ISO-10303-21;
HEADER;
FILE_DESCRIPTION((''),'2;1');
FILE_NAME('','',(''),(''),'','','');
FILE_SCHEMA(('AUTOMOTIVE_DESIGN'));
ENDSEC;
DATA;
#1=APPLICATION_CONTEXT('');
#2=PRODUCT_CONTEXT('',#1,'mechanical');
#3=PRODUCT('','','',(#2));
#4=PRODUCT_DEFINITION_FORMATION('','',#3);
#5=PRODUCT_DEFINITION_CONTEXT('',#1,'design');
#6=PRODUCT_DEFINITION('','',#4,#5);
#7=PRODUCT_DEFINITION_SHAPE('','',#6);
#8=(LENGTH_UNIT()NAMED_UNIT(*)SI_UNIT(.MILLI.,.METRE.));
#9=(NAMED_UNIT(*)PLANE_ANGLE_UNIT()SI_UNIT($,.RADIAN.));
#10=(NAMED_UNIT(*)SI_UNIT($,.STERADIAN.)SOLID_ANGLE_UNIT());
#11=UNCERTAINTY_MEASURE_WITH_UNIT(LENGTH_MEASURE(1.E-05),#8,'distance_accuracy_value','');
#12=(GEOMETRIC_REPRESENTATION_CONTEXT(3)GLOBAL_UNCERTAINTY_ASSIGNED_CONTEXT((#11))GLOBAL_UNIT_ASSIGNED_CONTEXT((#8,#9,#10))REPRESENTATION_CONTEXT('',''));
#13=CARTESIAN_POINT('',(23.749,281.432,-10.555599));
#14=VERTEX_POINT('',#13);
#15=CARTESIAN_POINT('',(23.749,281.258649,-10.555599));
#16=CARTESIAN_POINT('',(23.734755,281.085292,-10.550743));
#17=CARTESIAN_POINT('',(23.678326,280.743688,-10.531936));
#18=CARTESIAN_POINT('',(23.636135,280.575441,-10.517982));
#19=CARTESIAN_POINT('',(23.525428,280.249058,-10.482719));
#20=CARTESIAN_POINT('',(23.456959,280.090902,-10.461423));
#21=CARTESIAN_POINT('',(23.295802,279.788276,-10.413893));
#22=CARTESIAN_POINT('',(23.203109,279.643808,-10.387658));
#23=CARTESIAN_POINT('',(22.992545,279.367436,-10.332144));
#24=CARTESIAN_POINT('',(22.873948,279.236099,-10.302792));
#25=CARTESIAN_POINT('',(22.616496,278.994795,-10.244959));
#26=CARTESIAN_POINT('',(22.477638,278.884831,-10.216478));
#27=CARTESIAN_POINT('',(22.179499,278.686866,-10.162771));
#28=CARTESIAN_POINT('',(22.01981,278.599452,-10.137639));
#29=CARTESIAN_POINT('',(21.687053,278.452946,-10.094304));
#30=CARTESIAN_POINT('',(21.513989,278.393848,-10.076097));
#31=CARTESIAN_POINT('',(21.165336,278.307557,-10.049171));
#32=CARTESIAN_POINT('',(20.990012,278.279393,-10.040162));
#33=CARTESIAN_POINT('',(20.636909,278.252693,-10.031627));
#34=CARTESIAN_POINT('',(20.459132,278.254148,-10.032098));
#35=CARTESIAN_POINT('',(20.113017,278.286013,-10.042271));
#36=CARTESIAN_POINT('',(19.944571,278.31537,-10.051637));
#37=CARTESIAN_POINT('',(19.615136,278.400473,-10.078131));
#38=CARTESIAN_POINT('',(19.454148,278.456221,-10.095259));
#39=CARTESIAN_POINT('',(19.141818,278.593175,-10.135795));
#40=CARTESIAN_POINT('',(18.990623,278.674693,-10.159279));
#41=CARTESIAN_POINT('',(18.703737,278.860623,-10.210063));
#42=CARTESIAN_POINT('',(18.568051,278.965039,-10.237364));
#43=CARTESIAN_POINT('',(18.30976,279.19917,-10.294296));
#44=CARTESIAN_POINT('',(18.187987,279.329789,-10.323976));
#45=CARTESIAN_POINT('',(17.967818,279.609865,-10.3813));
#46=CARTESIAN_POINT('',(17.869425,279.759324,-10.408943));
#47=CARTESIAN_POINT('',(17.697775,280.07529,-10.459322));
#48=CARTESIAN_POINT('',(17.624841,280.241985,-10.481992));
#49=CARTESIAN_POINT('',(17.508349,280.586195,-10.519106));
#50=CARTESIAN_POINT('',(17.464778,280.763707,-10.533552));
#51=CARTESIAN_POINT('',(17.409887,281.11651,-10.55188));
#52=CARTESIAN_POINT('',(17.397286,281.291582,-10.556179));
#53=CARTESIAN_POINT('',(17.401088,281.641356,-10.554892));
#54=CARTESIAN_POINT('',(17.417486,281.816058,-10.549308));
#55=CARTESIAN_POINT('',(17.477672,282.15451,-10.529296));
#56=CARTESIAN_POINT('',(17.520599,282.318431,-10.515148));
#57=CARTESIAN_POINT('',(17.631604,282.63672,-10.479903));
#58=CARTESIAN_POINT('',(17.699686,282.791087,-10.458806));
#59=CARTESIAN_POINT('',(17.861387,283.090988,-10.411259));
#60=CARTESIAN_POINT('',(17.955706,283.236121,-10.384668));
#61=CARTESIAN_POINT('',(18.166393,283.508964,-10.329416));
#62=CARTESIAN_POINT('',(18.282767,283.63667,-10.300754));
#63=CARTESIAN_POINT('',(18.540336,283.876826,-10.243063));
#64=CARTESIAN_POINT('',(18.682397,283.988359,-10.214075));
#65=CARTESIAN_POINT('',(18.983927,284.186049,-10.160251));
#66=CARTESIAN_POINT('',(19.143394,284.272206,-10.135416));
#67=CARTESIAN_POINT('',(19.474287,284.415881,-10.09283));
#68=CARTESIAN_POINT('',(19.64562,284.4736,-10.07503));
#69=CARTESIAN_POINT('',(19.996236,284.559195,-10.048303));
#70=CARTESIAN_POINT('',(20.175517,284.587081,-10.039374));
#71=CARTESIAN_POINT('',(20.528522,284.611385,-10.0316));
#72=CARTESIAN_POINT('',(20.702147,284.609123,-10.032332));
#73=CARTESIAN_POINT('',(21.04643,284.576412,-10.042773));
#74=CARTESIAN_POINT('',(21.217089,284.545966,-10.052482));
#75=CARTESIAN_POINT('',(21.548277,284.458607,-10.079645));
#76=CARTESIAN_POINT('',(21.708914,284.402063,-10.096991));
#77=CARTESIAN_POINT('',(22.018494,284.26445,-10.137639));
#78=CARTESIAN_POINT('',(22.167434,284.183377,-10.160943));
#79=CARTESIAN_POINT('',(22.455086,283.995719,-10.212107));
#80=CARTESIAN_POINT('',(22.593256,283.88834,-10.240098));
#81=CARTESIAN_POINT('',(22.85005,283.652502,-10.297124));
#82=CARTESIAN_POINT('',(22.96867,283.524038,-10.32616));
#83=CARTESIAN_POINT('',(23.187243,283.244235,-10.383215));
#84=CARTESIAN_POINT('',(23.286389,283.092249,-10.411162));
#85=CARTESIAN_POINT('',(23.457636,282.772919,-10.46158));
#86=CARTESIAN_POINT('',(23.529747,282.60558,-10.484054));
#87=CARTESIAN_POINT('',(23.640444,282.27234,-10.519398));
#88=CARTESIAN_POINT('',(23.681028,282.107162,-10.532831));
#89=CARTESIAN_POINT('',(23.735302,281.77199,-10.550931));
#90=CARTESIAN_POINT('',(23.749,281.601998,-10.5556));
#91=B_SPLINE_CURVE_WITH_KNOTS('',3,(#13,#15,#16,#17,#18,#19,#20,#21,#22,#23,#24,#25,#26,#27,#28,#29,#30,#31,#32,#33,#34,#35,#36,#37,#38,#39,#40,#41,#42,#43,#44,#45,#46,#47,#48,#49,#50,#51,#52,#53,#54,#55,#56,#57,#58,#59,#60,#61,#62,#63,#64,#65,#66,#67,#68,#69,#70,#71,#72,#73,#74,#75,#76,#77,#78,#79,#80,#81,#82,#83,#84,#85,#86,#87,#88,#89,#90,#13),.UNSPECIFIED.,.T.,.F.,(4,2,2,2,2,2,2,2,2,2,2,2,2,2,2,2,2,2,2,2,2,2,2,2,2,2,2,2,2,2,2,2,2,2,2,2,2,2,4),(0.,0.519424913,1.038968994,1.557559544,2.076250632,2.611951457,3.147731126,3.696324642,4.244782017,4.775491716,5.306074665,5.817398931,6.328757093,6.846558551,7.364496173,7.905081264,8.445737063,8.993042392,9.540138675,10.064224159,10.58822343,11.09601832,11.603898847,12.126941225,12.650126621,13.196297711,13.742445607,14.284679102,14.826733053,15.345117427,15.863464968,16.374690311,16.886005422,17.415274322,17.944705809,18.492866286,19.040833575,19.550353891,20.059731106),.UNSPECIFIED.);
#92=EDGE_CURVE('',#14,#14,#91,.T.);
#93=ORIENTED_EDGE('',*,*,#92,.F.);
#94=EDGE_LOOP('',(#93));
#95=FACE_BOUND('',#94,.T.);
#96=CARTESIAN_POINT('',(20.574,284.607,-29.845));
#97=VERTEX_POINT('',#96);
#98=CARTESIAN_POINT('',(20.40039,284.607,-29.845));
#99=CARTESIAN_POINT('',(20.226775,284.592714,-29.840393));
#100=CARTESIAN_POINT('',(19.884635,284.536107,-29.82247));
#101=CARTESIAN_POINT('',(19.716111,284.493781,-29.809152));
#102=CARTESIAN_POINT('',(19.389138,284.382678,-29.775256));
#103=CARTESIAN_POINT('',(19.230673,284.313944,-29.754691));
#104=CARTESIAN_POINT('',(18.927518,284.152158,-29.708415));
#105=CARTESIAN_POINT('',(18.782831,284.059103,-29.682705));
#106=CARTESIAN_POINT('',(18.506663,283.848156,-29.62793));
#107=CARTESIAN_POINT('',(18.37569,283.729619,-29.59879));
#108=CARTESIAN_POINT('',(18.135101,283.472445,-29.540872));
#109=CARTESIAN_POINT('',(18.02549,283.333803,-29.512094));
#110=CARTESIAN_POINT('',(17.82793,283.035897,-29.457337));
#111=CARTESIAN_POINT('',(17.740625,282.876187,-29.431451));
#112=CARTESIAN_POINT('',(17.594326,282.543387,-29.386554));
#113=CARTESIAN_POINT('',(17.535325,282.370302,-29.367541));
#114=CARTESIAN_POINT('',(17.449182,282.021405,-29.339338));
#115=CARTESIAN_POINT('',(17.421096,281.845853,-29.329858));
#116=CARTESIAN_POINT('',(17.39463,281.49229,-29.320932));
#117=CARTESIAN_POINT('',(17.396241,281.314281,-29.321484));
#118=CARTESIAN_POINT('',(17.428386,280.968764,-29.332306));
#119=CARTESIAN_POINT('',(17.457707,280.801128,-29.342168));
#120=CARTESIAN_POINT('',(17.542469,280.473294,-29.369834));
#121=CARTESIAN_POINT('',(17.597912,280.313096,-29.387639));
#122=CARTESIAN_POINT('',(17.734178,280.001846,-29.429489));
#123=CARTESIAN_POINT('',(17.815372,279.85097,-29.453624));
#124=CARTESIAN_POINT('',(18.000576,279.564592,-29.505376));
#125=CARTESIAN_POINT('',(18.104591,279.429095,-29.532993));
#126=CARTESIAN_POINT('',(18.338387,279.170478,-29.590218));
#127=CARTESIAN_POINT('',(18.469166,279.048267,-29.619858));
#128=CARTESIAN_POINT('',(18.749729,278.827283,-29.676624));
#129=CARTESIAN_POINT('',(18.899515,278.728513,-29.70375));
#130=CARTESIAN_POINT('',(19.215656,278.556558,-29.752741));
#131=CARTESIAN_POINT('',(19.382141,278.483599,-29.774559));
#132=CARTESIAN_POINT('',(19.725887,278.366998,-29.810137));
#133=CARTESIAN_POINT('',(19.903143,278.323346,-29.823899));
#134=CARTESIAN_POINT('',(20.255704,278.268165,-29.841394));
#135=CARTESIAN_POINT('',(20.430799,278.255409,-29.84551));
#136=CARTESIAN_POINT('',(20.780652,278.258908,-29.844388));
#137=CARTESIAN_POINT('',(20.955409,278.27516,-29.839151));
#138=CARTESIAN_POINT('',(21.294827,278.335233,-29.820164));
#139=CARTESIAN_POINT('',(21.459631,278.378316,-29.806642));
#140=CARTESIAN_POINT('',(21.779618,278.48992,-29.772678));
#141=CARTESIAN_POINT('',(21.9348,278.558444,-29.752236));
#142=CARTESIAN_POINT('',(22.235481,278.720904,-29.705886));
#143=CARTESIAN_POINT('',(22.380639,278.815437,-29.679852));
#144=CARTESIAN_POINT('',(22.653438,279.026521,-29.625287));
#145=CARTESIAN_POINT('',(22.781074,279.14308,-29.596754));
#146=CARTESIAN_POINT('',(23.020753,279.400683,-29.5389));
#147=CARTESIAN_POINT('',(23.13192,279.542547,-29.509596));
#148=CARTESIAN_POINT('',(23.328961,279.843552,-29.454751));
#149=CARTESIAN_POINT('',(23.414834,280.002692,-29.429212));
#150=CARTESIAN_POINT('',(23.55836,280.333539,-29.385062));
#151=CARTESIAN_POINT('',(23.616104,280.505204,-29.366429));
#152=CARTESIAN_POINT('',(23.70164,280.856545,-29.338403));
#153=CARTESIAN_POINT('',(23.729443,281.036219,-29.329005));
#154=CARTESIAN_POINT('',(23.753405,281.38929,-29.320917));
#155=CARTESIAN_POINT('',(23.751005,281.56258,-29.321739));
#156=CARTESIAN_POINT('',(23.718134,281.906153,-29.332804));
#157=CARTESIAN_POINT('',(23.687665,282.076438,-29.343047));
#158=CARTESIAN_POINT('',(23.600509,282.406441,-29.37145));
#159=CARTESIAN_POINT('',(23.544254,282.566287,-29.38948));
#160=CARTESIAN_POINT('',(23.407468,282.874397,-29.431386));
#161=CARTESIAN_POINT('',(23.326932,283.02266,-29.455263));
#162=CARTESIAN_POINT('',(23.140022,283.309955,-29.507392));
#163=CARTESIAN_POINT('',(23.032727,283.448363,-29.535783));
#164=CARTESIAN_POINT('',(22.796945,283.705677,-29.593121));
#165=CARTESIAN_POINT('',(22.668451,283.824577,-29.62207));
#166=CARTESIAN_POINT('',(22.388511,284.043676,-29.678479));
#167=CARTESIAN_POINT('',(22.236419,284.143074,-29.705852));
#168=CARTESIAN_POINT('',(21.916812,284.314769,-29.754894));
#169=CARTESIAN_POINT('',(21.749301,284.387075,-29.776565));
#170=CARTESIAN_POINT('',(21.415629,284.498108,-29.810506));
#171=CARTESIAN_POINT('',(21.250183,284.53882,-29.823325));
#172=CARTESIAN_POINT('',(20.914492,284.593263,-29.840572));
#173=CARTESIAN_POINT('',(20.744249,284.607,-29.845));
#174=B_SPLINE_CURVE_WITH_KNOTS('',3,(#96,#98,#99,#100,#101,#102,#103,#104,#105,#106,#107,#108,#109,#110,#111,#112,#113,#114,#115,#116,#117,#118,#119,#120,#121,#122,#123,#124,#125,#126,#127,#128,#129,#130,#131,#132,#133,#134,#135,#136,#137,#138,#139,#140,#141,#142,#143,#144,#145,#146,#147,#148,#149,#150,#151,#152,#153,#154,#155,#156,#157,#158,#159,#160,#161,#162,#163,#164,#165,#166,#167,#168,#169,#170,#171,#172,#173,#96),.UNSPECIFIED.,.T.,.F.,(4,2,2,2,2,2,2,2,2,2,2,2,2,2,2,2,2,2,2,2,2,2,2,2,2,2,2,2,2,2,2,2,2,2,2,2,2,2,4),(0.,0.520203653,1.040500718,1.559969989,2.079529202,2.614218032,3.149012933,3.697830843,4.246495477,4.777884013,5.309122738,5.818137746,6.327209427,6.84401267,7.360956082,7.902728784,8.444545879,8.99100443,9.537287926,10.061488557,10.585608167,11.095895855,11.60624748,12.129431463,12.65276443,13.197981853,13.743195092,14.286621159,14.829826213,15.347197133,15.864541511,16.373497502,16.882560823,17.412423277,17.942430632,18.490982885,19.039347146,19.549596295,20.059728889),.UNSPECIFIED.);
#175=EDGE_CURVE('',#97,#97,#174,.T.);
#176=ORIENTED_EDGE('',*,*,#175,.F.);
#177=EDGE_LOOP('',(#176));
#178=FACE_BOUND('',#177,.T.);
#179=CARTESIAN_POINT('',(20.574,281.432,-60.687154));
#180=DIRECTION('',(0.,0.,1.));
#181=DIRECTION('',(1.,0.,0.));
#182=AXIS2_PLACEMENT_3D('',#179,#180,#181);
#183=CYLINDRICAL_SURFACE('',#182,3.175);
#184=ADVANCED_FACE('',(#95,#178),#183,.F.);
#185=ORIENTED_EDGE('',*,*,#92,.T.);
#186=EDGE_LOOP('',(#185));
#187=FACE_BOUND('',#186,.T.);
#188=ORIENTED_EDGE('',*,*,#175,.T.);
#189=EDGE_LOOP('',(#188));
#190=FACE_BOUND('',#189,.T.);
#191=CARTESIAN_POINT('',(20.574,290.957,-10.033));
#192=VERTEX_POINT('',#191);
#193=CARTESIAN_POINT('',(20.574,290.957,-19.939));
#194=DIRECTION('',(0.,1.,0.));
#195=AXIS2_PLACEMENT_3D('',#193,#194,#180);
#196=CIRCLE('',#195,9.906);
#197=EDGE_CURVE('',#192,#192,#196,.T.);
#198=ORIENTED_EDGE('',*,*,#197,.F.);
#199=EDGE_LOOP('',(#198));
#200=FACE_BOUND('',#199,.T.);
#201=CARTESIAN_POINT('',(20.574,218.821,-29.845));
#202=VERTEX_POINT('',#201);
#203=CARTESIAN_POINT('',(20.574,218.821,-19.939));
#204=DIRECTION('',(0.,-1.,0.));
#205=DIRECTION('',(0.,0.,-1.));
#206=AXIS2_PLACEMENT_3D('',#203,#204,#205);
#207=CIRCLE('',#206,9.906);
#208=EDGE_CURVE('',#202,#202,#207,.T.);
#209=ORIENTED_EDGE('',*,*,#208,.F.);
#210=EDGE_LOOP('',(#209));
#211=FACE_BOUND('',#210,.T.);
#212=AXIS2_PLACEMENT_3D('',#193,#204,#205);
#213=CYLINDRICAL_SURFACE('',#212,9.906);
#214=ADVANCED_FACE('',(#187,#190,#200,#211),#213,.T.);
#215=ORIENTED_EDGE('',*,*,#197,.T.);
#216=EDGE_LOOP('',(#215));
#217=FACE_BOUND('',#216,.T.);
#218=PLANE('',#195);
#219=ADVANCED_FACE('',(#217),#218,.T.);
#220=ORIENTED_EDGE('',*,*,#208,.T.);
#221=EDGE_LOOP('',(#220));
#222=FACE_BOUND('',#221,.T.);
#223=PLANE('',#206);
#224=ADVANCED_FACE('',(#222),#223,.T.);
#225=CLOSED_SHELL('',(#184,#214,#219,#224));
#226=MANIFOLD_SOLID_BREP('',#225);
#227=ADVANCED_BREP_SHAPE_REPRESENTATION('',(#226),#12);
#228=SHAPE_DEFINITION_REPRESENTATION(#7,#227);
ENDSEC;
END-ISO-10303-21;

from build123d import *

# Parameters (mm, degrees)
BOSS_EXTRUDE1_DEPTH      = 6.35
SKETCH6_R                = 19.431
BOSS_EXTRUDE4_DEPTH      = 0.762
SKETCH7_R                = 19.05
BOSS_EXTRUDE5_DEPTH      = 68.326
FILLET6_R                = 5.08
FILLET7_R                = 1.905
BOSS_EXTRUDE15_DEPTH     = 6.35
SKETCH24_R               = 4.064
BOSS_EXTRUDE16_DEPTH     = 10.16
SKETCH25_R               = 2.54
BOSS_EXTRUDE17_DEPTH     = 10.16
BOSS_EXTRUDE19_DEPTH     = 16.51
FILLET13_R               = 1.905
FILLET14_R               = 5.08
BOSS_EXTRUDE20_DEPTH     = 18.796
CHAMFER1_SIZE            = 2.54
FILLET15_R               = 2.54
CHAMFER2_SIZE            = 0.762
SKETCH27_R               = 3.175
CUT_EXTRUDE3_DEPTH       = 19.05
SKETCH28_R               = 19.05
BOSS_EXTRUDE22_DEPTH     = 1.27
SKETCH29_R               = 19.05
BOSS_EXTRUDE24_DEPTH     = 3.048
BOSS_EXTRUDE25_START     = 4.318
SKETCH8_R                = 4.953
BOSS_EXTRUDE25_DEPTH     = 1.27
FILLET16_R               = 0.2286
BOSS_EXTRUDE26_DEPTH     = 254.381
BOSS_EXTRUDE27_DEPTH     = 8.89
SKETCH33_R               = 9.906
BOSS_EXTRUDE28_DEPTH     = 21.336
BOSS_EXTRUDE30_DEPTH     = 2.159
BOSS_EXTRUDE31_DEPTH     = 2.159
BOSS_EXTRUDE33_DEPTH     = 12.7
BOSS_EXTRUDE33_2_DEPTH   = 12.7
FILLET17_R               = 0.2286
FILLET18_R               = 0.2286
SKETCH43_R               = 3.175
BOSS_EXTRUDE34_DEPTH     = 1.27
FILLET19_R               = 1.27
SKETCH44_R               = 3.175
BOSS_EXTRUDE35_DEPTH     = 1.27
FILLET20_R               = 1.27
CUT_EXTRUDE5_START       = -2.54
CUT_EXTRUDE5_DEPTH       = 2.54
CUT_EXTRUDE6_START       = -2.54
CUT_EXTRUDE6_DEPTH       = 2.54
SKETCH47_R               = 2.54
BOSS_EXTRUDE36_DEPTH     = 2.54
BOSS_EXTRUDE36_2_DEPTH   = 2.54
BOSS_EXTRUDE36_3_DEPTH   = 2.54
FILLET22_R               = 1.524
FILLET23_R               = 1.524
SKETCH48_R               = 3.81
BOSS_EXTRUDE37_DEPTH     = 1.524
FILLET24_R               = 1.524
FILLET25_R               = 1.524
SKETCH49_R               = 3.81
CUT_EXTRUDE7_DEPTH       = 2.54
SKETCH50_R               = 3.556
BOSS_EXTRUDE39_DEPTH     = 2.54
CUT_EXTRUDE11_DEPTH      = 305.554552522
CUT_EXTRUDE11_DEPTH_BACK = 305.554552522
SKETCH52_R               = 3.175
SKETCH55_W               = 170.584012947
SKETCH55_H               = 114.953192418
CUT_EXTRUDE13_DEPTH      = 346.202
SKETCH56_R               = 9.906
BOSS_EXTRUDE40_DEPTH     = 50.8


with BuildPart() as part:
    # Sketch1 → Boss-Extrude1 (new body)
    with BuildSketch(Plane(origin=(0, 0, 0), x_dir=(1, 0, 0), z_dir=(0, 1, 0))):
        with BuildLine():
            Line((0, 32.639), (7.239, 39.878))
            Line((7.239, 39.878), (55.118, 39.878))
            ThreePointArc((55.118, 39.878), (75.057, 19.939), (55.118, 0))
            Line((55.118, 0), (7.239, 0))
            Line((7.239, 0), (0, 7.239))
            Line((0, 7.239), (0, 32.639))
        make_face()
    extrude(amount=BOSS_EXTRUDE1_DEPTH)

    # Fillet6
    fillet6_edges = [part.edges().sort_by_distance(p)[0] for p in [
        (0, 3.175, -7.239),
        (0, 3.175, -32.639),
    ]]
    fillet(fillet6_edges, radius=FILLET6_R)

    # Fillet7
    fillet7_edges = [part.edges().sort_by_distance(p)[0] for p in [
        (7.239, 3.175, 0),
        (7.239, 3.175, -39.878),
    ]]
    fillet(fillet7_edges, radius=FILLET7_R)


with BuildPart() as body_2:
    # Sketch6 → Boss-Extrude4 (new body)
    with BuildSketch(Plane(origin=(0, 6.35, 0), x_dir=(1, 0, 0), z_dir=(0, 1, 0))):
        with Locations(Location((55.118, 19.939, 0), (0, 0, 90))):
            Circle(SKETCH6_R)
    extrude(amount=BOSS_EXTRUDE4_DEPTH)


with BuildPart() as body_3:
    # Sketch7 → Boss-Extrude5 (new body)
    with BuildSketch(Plane(origin=(0, 7.112, 0), x_dir=(1, 0, 0), z_dir=(0, 1, 0))):
        with Locations(Location((55.118, 19.939, 0), (0, 0, 270))):
            Circle(SKETCH7_R)
    extrude(amount=BOSS_EXTRUDE5_DEPTH)


with BuildPart() as body_4:
    # Sketch23 → Boss-Extrude15 (new body)
    with BuildSketch(Plane(origin=(12.522748088, 0, -46.735532116), x_dir=(0, -1, 0), z_dir=(0.25881904510252135, 0, -0.9659258262890681))):
        with BuildLine():
            Line((-2.032, -53.883866243), (5.588, -53.883866243))
            ThreePointArc((5.588, -53.883866243), (11.303, -48.168866243), (5.588, -42.453866243))
            Line((5.588, -42.453866243), (-2.032, -42.453866243))
            Line((-2.032, -42.453866243), (-2.032, -53.883866243))
        make_face()
    extrude(amount=BOSS_EXTRUDE15_DEPTH)

    # Sketch24 → Boss-Extrude16 (add)
    with BuildSketch(Plane(origin=(14.166249025, 0, -52.869161113), x_dir=(-0.9659258262890682, 0, -0.25881904510252135), z_dir=(0.2588190451025213, 0, -0.9659258262890681))):
        with Locations((-48.168866243, -5.588)):
            Circle(SKETCH24_R)
    extrude(amount=BOSS_EXTRUDE16_DEPTH)

    # Sketch25 → Boss-Extrude17 (add)
    with BuildSketch(Plane(origin=(16.795850523, 0, -62.682967508), x_dir=(-0.9659258262890681, 0, -0.25881904510252135), z_dir=(0.25881904510252135, 0, -0.9659258262890681))):
        with Locations((-48.168866243, -5.588)):
            Circle(SKETCH25_R)
    extrude(amount=BOSS_EXTRUDE17_DEPTH)


with BuildPart() as body_5:
    # Sketch1<3> → Boss-Extrude19 (new body)
    with BuildSketch(Plane(origin=(0, 0, 0), x_dir=(1, 0, 0), z_dir=(0, 1, 0))):
        with BuildLine():
            Line((0, 32.639), (7.239, 39.878))
            Line((7.239, 39.878), (55.118, 39.878))
            ThreePointArc((55.118, 39.878), (75.057, 19.939), (55.118, 0))
            Line((55.118, 0), (7.239, 0))
            Line((7.239, 0), (0, 7.239))
            Line((0, 7.239), (0, 32.639))
        make_face()
    extrude(amount=-BOSS_EXTRUDE19_DEPTH)

    # Fillet13
    fillet13_edges = [body_5.edges().sort_by_distance(p)[0] for p in [
        (7.239, -8.255, 0),
        (7.239, -8.255, -39.878),
    ]]
    fillet(fillet13_edges, radius=FILLET13_R)

    # Fillet14
    fillet14_edges = [body_5.edges().sort_by_distance(p)[0] for p in [
        (0, -8.255, -7.239),
        (0, -8.255, -32.639),
    ]]
    fillet(fillet14_edges, radius=FILLET14_R)

    # Sketch45 → Cut-Extrude5 (cut)
    with BuildSketch(Plane.XZ.offset(16.51).offset(CUT_EXTRUDE5_START)):
        with BuildLine():
            ThreePointArc((5.044290367, -35.978344089), (4.718699387, -36.549691761), (4.084467985, -36.723467985))
            Line((4.084467985, -36.723467985), (6.681038418, -39.320038418))
            ThreePointArc((6.681038418, -39.320038418), (7.299064898, -39.732990509), (8.028076836, -39.878))
            Line((8.028076836, -39.878), (11.393838428, -39.878))
            ThreePointArc((11.393838428, -39.878), (11.138454644, -39.419455597), (11.282110896, -38.914632134))
            ThreePointArc((11.282110896, -38.914632134), (10.476958507, -32.531164357), (5.044290367, -35.978344089))
        make_face()
        with BuildLine():
            ThreePointArc((11.282110896, -0.963367866), (11.138454644, -0.458544403), (11.393838428, 0))
            Line((11.393838428, 0), (8.028076836, 0))
            ThreePointArc((8.028076836, 0), (7.299064898, -0.145009491), (6.681038418, -0.557961582))
            Line((6.681038418, -0.557961582), (4.084467985, -3.154532015))
            ThreePointArc((4.084467985, -3.154532015), (4.718699387, -3.328308239), (5.044290367, -3.899655911))
            ThreePointArc((5.044290367, -3.899655911), (10.476958507, -7.346835643), (11.282110896, -0.963367866))
        make_face()
    extrude(amount=CUT_EXTRUDE5_DEPTH, mode=Mode.SUBTRACT)

    # Sketch45<3> → Cut-Extrude6 (cut)
    with BuildSketch(Plane.XZ.offset(16.51).offset(CUT_EXTRUDE6_START)):
        with BuildLine():
            Line((4.084467985, -36.723467985), (6.681038418, -39.320038418))
            ThreePointArc((6.681038418, -39.320038418), (7.299064898, -39.732990509), (8.028076836, -39.878))
            Line((8.028076836, -39.878), (11.393838428, -39.878))
            ThreePointArc((11.393838428, -39.878), (11.138454644, -39.419455597), (11.282110896, -38.914632134))
            ThreePointArc((11.282110896, -38.914632134), (10.476958507, -32.531164357), (5.044290367, -35.978344089))
            ThreePointArc((5.044290367, -35.978344089), (4.718699387, -36.549691761), (4.084467985, -36.723467985))
        make_face()
        with BuildLine():
            Line((11.393838428, 0), (8.028076836, 0))
            ThreePointArc((8.028076836, 0), (7.299064898, -0.145009491), (6.681038418, -0.557961582))
            Line((6.681038418, -0.557961582), (4.084467985, -3.154532015))
            ThreePointArc((4.084467985, -3.154532015), (4.718699387, -3.328308239), (5.044290367, -3.899655911))
            ThreePointArc((5.044290367, -3.899655911), (10.476958507, -7.346835643), (11.282110896, -0.963367866))
            ThreePointArc((11.282110896, -0.963367866), (11.138454644, -0.458544403), (11.393838428, 0))
        make_face()
        with BuildLine():
            ThreePointArc((73.662109712, -16.992248385), (67.437, -19.939), (73.662109712, -22.885751615))
            ThreePointArc((73.662109712, -22.885751615), (74.341584064, -23.041280193), (74.712069674, -23.631716426))
            ThreePointArc((74.712069674, -23.631716426), (75.057, -19.939), (74.712069674, -16.246283574))
            ThreePointArc((74.712069674, -16.246283574), (74.341584064, -16.836719807), (73.662109712, -16.992248385))
        make_face()
    extrude(amount=CUT_EXTRUDE6_DEPTH, mode=Mode.SUBTRACT)


with BuildPart() as body_6:
    # Sketch26 → Boss-Extrude20 (new body)
    with BuildSketch(Plane(origin=(0, -16.51, 0), x_dir=(-1, 0, 0), z_dir=(0, -1, 0))):
        Polygon((-20.574, 28.829), (-11.684, 28.829), (-11.684, 11.049), (-29.464, 11.049), (-29.464, 28.829), align=None)
    extrude(amount=BOSS_EXTRUDE20_DEPTH)

    # Chamfer1
    chamfer1_edges = [body_6.edges().sort_by_distance(p)[0] for p in [
        (11.684, -25.908, -11.049),
        (29.464, -25.908, -11.049),
        (29.464, -25.908, -28.829),
        (11.684, -25.908, -28.829),
    ]]
    chamfer(chamfer1_edges, length=CHAMFER1_SIZE)

    # Fillet15
    fillet15_edges = [body_6.edges().sort_by_distance(p)[0] for p in [
        (29.464, -25.908, -13.589),
        (29.464, -25.908, -26.289),
        (14.224, -25.908, -28.829),
        (26.924, -25.908, -28.829),
        (14.224, -25.908, -11.049),
        (26.924, -25.908, -11.049),
        (11.684, -25.908, -26.289),
        (11.684, -25.908, -13.589),
    ]]
    fillet(fillet15_edges, radius=FILLET15_R)

    # Chamfer2
    chamfer2_edges = [body_6.edges().sort_by_distance(p)[0] for p in [
        (11.684, -35.306, -19.939),
        (12.954, -35.306, -12.319),
        (20.574, -35.306, -28.829),
        (28.194, -35.306, -27.559),
        (29.464, -35.306, -19.939),
        (28.194, -35.306, -12.319),
        (20.574, -35.306, -11.049),
        (12.954, -35.306, -27.559),
        (14.30408653, -35.306, -28.635654013),
        (11.877345987, -35.306, -26.20891347),
        (26.84391347, -35.306, -28.635654013),
        (29.270654013, -35.306, -26.20891347),
        (29.270654013, -35.306, -13.66908653),
        (26.84391347, -35.306, -11.242345987),
        (14.30408653, -35.306, -11.242345987),
        (11.877345987, -35.306, -13.66908653),
    ]]
    chamfer(chamfer2_edges, length=CHAMFER2_SIZE)

    # Sketch27 → Cut-Extrude3 (cut)
    with BuildSketch(Plane.XY.offset(-11.049)):
        with Locations((20.574, -26.67)):
            Circle(SKETCH27_R)
    extrude(amount=-CUT_EXTRUDE3_DEPTH, mode=Mode.SUBTRACT)


with BuildPart() as body_7:
    # Sketch28 → Boss-Extrude22 (new body)
    with BuildSketch(Plane(origin=(0, 75.438, 0), x_dir=(1, 0, 0), z_dir=(0, 1, 0))):
        with Locations(Location((55.118, 19.939, 0), (0, 0, 270))):
            Circle(SKETCH28_R)
    extrude(amount=BOSS_EXTRUDE22_DEPTH)


with BuildPart() as body_8:
    # Sketch29 → Boss-Extrude24 (new body)
    with BuildSketch(Plane(origin=(0, 76.708, 0), x_dir=(1, 0, 0), z_dir=(0, 1, 0))):
        with Locations(Location((55.118, 19.939, 0), (0, 0, 270))):
            Circle(SKETCH29_R)
    extrude(amount=BOSS_EXTRUDE24_DEPTH)

    # Sketch8 → Boss-Extrude25 (add)
    with BuildSketch(Plane(origin=(0, 75.438, 0), x_dir=(1, 0, 0), z_dir=(0, 1, 0)).offset(BOSS_EXTRUDE25_START)):
        with Locations(Location((55.118, 19.939, 0), (0, 0, 270))):
            Circle(SKETCH8_R)
    extrude(amount=BOSS_EXTRUDE25_DEPTH)

    # Fillet16
    fillet16_edges = [body_8.edges().sort_by_distance(p)[0] for p in [
        (55.118, 81.026, -24.892),
    ]]
    fillet(fillet16_edges, radius=FILLET16_R)


with BuildPart() as body_9:
    # Sketch15 → Boss-Extrude26 (new body)
    with BuildSketch(Plane(origin=(0, 6.35, 0), x_dir=(1, 0, 0), z_dir=(0, 1, 0))):
        with BuildLine():
            Line((0, 19.939), (0, 10.286870396))
            Line((0, 10.286870396), (16.411980417, 5.54225678))
            ThreePointArc((16.411980417, 5.54225678), (35.560281138, 19.939054609), (16.411875495, 34.335712887))
            Line((16.411875495, 34.335712887), (0, 29.591))
            Line((0, 29.591), (0, 19.939))
        make_face()
    extrude(amount=BOSS_EXTRUDE26_DEPTH)

    # Sketch48 → Boss-Extrude37 (add)
    with BuildSketch(Plane.ZY):
        with Locations(Location((-19.939, 12.7, 0), (0, 0, 180))):
            Circle(SKETCH48_R)
    extrude(amount=BOSS_EXTRUDE37_DEPTH)

    # Fillet24
    fillet24_edges = [body_9.edges().sort_by_distance(p)[0] for p in [
        (-1.524, 12.7, -16.129),
    ]]
    fillet(fillet24_edges, radius=FILLET24_R - 0.0001)  # a hair under: the kernel refuses the full size

    # Sketch49 → Cut-Extrude7 (cut)
    with BuildSketch(Plane.ZY):
        with Locations((-19.938935198, 255.778)):
            Circle(SKETCH49_R)
    extrude(amount=-CUT_EXTRUDE7_DEPTH, mode=Mode.SUBTRACT)

    # Sketch50 → Boss-Extrude39 (add)
    with BuildSketch(Plane.ZY.offset(-2.54)):
        with Locations((-19.938935198, 255.778)):
            Circle(SKETCH50_R)
    extrude(amount=BOSS_EXTRUDE39_DEPTH)


with BuildPart() as body_10:
    # Sketch32 → Boss-Extrude27 (new body)
    with BuildSketch(Plane(origin=(0, 260.731, 0), x_dir=(1, 0, 0), z_dir=(0, 1, 0))):
        with BuildLine():
            Line((0, 10.286870396), (0, 29.591))
            Line((0, 29.591), (16.411875495, 34.335712887))
            ThreePointArc((16.411875495, 34.335712887), (35.560281138, 19.939054609), (16.411980417, 5.54225678))
            Line((16.411980417, 5.54225678), (0, 10.286870396))
        make_face()
    extrude(amount=BOSS_EXTRUDE27_DEPTH)

    # Sketch33 → Boss-Extrude28 (add)
    with BuildSketch(Plane(origin=(0, 269.621, 0), x_dir=(1, 0, 0), z_dir=(0, 1, 0))):
        with Locations(Location((20.574, 19.939, 0), (0, 0, 270))):
            Circle(SKETCH33_R)
    extrude(amount=BOSS_EXTRUDE28_DEPTH)

    # Sketch52 → Cut-Extrude11 (cut, two sides: drawn at the far end of the back side and taken through both)
    with BuildSketch(Plane.XY.offset(-11.049).offset(-CUT_EXTRUDE11_DEPTH_BACK)):
        with Locations(Location((20.574, 281.432, 0), (0, 0, 89.99999999))):
            Circle(SKETCH52_R)
    extrude(amount=CUT_EXTRUDE11_DEPTH + CUT_EXTRUDE11_DEPTH_BACK, mode=Mode.SUBTRACT)


with BuildPart() as body_11:
    # Sketch41 → Boss-Extrude30 (new body)
    with BuildSketch(Plane(origin=(0, 6.35, 0), x_dir=(1, 0, 0), z_dir=(0, 1, 0))):
        with BuildLine():
            Line((0, 29.591), (16.411875495, 34.335712887))
            ThreePointArc((16.411875495, 34.335712887), (22.021175201, 34.855243035), (27.425990452, 33.267122493))
            Line((27.425990452, 33.267122493), (29.11221422, 34.953346261))
            ThreePointArc((29.11221422, 34.953346261), (22.604273469, 37.091541659), (15.776987058, 36.531780434))
            Line((15.776987058, 36.531780434), (0.2736806, 32.049737053))
            Line((0.2736806, 32.049737053), (0, 30.534795103))
            Line((0, 30.534795103), (0, 29.591))
        make_face()
    extrude(amount=BOSS_EXTRUDE30_DEPTH)


with BuildPart() as body_12:
    # Sketch41<11> → Boss-Extrude31 (new body)
    with BuildSketch(Plane(origin=(0, 6.35, 0), x_dir=(1, 0, 0), z_dir=(0, 1, 0))):
        with BuildLine():
            Line((16.411875495, 5.542157508), (0, 10.286870396))
            Line((0, 10.286870396), (0, 9.343204897))
            Line((0, 9.343204897), (0, 9.343075292))
            Line((0, 9.343075292), (0.2736806, 7.828133343))
            Line((0.2736806, 7.828133343), (15.776987058, 3.346089961))
            ThreePointArc((15.776987058, 3.346089961), (22.604273469, 2.786328737), (29.11221422, 4.924524135))
            Line((29.11221422, 4.924524135), (27.425990452, 6.610747903))
            ThreePointArc((27.425990452, 6.610747903), (22.021175201, 5.02262736), (16.411875495, 5.542157508))
        make_face()
    extrude(amount=BOSS_EXTRUDE31_DEPTH)


with BuildPart() as body_13:
    # Sketch41<12> → Boss-Extrude33 (new body)
    with BuildSketch(Plane(origin=(0, 6.35, 0), x_dir=(1, 0, 0), z_dir=(0, 1, 0))):
        with BuildLine():
            Line((29.11221422, 34.953346261), (27.425990452, 33.267122493))
            ThreePointArc((27.425990452, 33.267122493), (31.070982239, 30.634886416), (33.77116823, 27.039941701))
            Line((33.77116823, 27.039941701), (37.542875801, 30.811649272))
            Line((37.542875801, 30.811649272), (31.256696516, 37.097828557))
            Line((31.256696516, 37.097828557), (29.11221422, 34.953346261))
        make_face()
    extrude(amount=BOSS_EXTRUDE33_DEPTH)

    # Fillet17
    fillet17_edges = [body_13.edges().sort_by_distance(p)[0] for p in [
        (35.657022016, 19.05, -28.925795487),
        (34.399786159, 19.05, -33.954738915),
        (29.341343484, 19.05, -35.182475525),
        (31.256696516, 12.7, -37.097828557),
        (37.542875801, 12.7, -30.811649272),
    ]]
    fillet(fillet17_edges, radius=FILLET17_R)


with BuildPart() as body_14:
    # Sketch41<12> → Boss-Extrude33 2 (new body)
    with BuildSketch(Plane(origin=(0, 6.35, 0), x_dir=(1, 0, 0), z_dir=(0, 1, 0))):
        with BuildLine():
            Line((31.256696516, 2.780041839), (37.542875801, 9.066221123))
            Line((37.542875801, 9.066221123), (33.77116823, 12.837928694))
            ThreePointArc((33.77116823, 12.837928694), (31.070982239, 9.24298398), (27.425990452, 6.610747903))
            Line((27.425990452, 6.610747903), (29.11221422, 4.924524135))
            Line((29.11221422, 4.924524135), (31.256696516, 2.780041839))
        make_face()
    extrude(amount=BOSS_EXTRUDE33_2_DEPTH)

    # Fillet18
    fillet18_edges = [body_14.edges().sort_by_distance(p)[0] for p in [
        (34.399786159, 19.05, -5.923131481),
        (35.657022016, 19.05, -10.952074909),
        (29.341343484, 19.05, -4.695394871),
        (37.542875801, 12.7, -9.066221123),
        (31.256696516, 12.7, -2.780041839),
    ]]
    fillet(fillet18_edges, radius=FILLET18_R)


with BuildPart() as body_15:
    # Sketch43 → Boss-Extrude34 (new body)
    with BuildSketch(Plane(origin=(34.177262537, 0, -34.177262537), x_dir=(-0.7071067811865481, 0, -0.7071067811865469), z_dir=(0.7071067811865469, 0, -0.7071067811865481))):
        with Locations(Location((-0.314695924, 13.7414, 0), (0, 0, 180))):
            Circle(SKETCH43_R)
    extrude(amount=BOSS_EXTRUDE34_DEPTH)

    # Fillet19
    fillet19_edges = [body_15.edges().sort_by_distance(p)[0] for p in [
        (33.052747741, 13.7414, -37.097828557),
    ]]
    fillet(fillet19_edges, radius=FILLET19_R - 0.0001)  # a hair under: the kernel refuses the full size


with BuildPart() as body_16:
    # Sketch44 → Boss-Extrude35 (new body)
    with BuildSketch(Plane(origin=(14.238327339, 0, 14.238327339), x_dir=(0.7071067811865481, 0, -0.7071067811865469), z_dir=(0.7071067811865469, 0, 0.7071067811865481))):
        with Locations(Location((28.5126085, 13.7414, 0), (0, 0, 180))):
            Circle(SKETCH44_R)
    extrude(amount=BOSS_EXTRUDE35_DEPTH)

    # Fillet20
    fillet20_edges = [body_16.edges().sort_by_distance(p)[0] for p in [
        (37.542875801, 13.7414, -7.270169899),
    ]]
    fillet(fillet20_edges, radius=FILLET20_R - 0.0001)  # a hair under: the kernel refuses the full size


with BuildPart() as body_17:
    # Sketch47 → Boss-Extrude36 (new body)
    with BuildSketch(Plane(origin=(0, -13.97, 0), x_dir=(-1, 0, 0), z_dir=(0, -1, 0))):
        with Locations(Location((-8.854290367, 35.978344089, 0), (0, 0, 90))):
            Circle(SKETCH47_R)
    extrude(amount=BOSS_EXTRUDE36_DEPTH)

    # Fillet22
    fillet22_edges = [body_17.edges().sort_by_distance(p)[0] for p in [
        (8.854290367, -16.51, -33.438344089),
    ]]
    fillet(fillet22_edges, radius=FILLET22_R)


with BuildPart() as body_18:
    # Sketch47 → Boss-Extrude36 2 (new body)
    with BuildSketch(Plane(origin=(0, -13.97, 0), x_dir=(-1, 0, 0), z_dir=(0, -1, 0))):
        with Locations(Location((-8.854290367, 3.899655911, 0), (0, 0, 90))):
            Circle(SKETCH47_R)
    extrude(amount=BOSS_EXTRUDE36_2_DEPTH)

    # Fillet23
    fillet23_edges = [body_18.edges().sort_by_distance(p)[0] for p in [
        (8.854290367, -16.51, -1.359655911),
    ]]
    fillet(fillet23_edges, radius=FILLET23_R)


with BuildPart() as body_19:
    # Sketch47 → Boss-Extrude36 3 (new body)
    with BuildSketch(Plane(origin=(0, -13.97, 0), x_dir=(-1, 0, 0), z_dir=(0, -1, 0))):
        with Locations(Location((-71.247, 19.939, 0), (0, 0, 90))):
            Circle(SKETCH47_R)
    extrude(amount=BOSS_EXTRUDE36_3_DEPTH)

    # Fillet25
    fillet25_edges = [body_19.edges().sort_by_distance(p)[0] for p in [
        (71.247, -16.51, -17.399),
    ]]
    fillet(fillet25_edges, radius=FILLET25_R)


with BuildPart() as cut_extrude13_tool:
    # Sketch55 → Cut-Extrude13 (new body)
    with BuildSketch(Plane(origin=(0, 269.621, 0), x_dir=(1, 0, 0), z_dir=(0, 1, 0))):
        with Locations((34.605125539, 14.00827457)):
            Rectangle(SKETCH55_W, SKETCH55_H)
    extrude(amount=-CUT_EXTRUDE13_DEPTH)


with BuildPart() as part_1:
    add(part.part)

    # Cut-Extrude13: cut by cut_extrude13_tool
    add(cut_extrude13_tool.part, mode=Mode.SUBTRACT)


with BuildPart() as body_2_1:
    add(body_2.part)

    # Cut-Extrude13: cut by cut_extrude13_tool
    add(cut_extrude13_tool.part, mode=Mode.SUBTRACT)


with BuildPart() as body_3_1:
    add(body_3.part)

    # Cut-Extrude13: cut by cut_extrude13_tool
    add(cut_extrude13_tool.part, mode=Mode.SUBTRACT)


with BuildPart() as body_4_1:
    add(body_4.part)

    # Cut-Extrude13: cut by cut_extrude13_tool
    add(cut_extrude13_tool.part, mode=Mode.SUBTRACT)


with BuildPart() as body_5_1:
    add(body_5.part)

    # Cut-Extrude13: cut by cut_extrude13_tool
    add(cut_extrude13_tool.part, mode=Mode.SUBTRACT)


with BuildPart() as body_6_1:
    add(body_6.part)

    # Cut-Extrude13: cut by cut_extrude13_tool
    add(cut_extrude13_tool.part, mode=Mode.SUBTRACT)


with BuildPart() as body_7_1:
    add(body_7.part)

    # Cut-Extrude13: cut by cut_extrude13_tool
    add(cut_extrude13_tool.part, mode=Mode.SUBTRACT)


with BuildPart() as body_8_1:
    add(body_8.part)

    # Cut-Extrude13: cut by cut_extrude13_tool
    add(cut_extrude13_tool.part, mode=Mode.SUBTRACT)


with BuildPart() as body_9_1:
    add(body_9.part)

    # Cut-Extrude13: cut by cut_extrude13_tool
    add(cut_extrude13_tool.part, mode=Mode.SUBTRACT)


with BuildPart() as body_10_1:
    add(body_10.part)

    # Cut-Extrude13: cut by cut_extrude13_tool
    add(cut_extrude13_tool.part, mode=Mode.SUBTRACT)

    # Sketch56 → Boss-Extrude40 (add)
    with BuildSketch(Plane.XZ.offset(-269.621)):
        with Locations(Location((20.574, -19.939, 0), (0, 0, 270))):
            Circle(SKETCH56_R)
    extrude(amount=BOSS_EXTRUDE40_DEPTH)


with BuildPart() as body_11_1:
    add(body_11.part)

    # Cut-Extrude13: cut by cut_extrude13_tool
    add(cut_extrude13_tool.part, mode=Mode.SUBTRACT)


with BuildPart() as body_12_1:
    add(body_12.part)

    # Cut-Extrude13: cut by cut_extrude13_tool
    add(cut_extrude13_tool.part, mode=Mode.SUBTRACT)


with BuildPart() as body_13_1:
    add(body_13.part)

    # Cut-Extrude13: cut by cut_extrude13_tool
    add(cut_extrude13_tool.part, mode=Mode.SUBTRACT)


with BuildPart() as body_14_1:
    add(body_14.part)

    # Cut-Extrude13: cut by cut_extrude13_tool
    add(cut_extrude13_tool.part, mode=Mode.SUBTRACT)


with BuildPart() as body_15_1:
    add(body_15.part)

    # Cut-Extrude13: cut by cut_extrude13_tool
    add(cut_extrude13_tool.part, mode=Mode.SUBTRACT)


with BuildPart() as body_16_1:
    add(body_16.part)

    # Cut-Extrude13: cut by cut_extrude13_tool
    add(cut_extrude13_tool.part, mode=Mode.SUBTRACT)


with BuildPart() as body_17_1:
    add(body_17.part)

    # Cut-Extrude13: cut by cut_extrude13_tool
    add(cut_extrude13_tool.part, mode=Mode.SUBTRACT)


with BuildPart() as body_18_1:
    add(body_18.part)

    # Cut-Extrude13: cut by cut_extrude13_tool
    add(cut_extrude13_tool.part, mode=Mode.SUBTRACT)


with BuildPart() as body_19_1:
    add(body_19.part)

    # Cut-Extrude13: cut by cut_extrude13_tool
    add(cut_extrude13_tool.part, mode=Mode.SUBTRACT)


solid = body_10_1.part
